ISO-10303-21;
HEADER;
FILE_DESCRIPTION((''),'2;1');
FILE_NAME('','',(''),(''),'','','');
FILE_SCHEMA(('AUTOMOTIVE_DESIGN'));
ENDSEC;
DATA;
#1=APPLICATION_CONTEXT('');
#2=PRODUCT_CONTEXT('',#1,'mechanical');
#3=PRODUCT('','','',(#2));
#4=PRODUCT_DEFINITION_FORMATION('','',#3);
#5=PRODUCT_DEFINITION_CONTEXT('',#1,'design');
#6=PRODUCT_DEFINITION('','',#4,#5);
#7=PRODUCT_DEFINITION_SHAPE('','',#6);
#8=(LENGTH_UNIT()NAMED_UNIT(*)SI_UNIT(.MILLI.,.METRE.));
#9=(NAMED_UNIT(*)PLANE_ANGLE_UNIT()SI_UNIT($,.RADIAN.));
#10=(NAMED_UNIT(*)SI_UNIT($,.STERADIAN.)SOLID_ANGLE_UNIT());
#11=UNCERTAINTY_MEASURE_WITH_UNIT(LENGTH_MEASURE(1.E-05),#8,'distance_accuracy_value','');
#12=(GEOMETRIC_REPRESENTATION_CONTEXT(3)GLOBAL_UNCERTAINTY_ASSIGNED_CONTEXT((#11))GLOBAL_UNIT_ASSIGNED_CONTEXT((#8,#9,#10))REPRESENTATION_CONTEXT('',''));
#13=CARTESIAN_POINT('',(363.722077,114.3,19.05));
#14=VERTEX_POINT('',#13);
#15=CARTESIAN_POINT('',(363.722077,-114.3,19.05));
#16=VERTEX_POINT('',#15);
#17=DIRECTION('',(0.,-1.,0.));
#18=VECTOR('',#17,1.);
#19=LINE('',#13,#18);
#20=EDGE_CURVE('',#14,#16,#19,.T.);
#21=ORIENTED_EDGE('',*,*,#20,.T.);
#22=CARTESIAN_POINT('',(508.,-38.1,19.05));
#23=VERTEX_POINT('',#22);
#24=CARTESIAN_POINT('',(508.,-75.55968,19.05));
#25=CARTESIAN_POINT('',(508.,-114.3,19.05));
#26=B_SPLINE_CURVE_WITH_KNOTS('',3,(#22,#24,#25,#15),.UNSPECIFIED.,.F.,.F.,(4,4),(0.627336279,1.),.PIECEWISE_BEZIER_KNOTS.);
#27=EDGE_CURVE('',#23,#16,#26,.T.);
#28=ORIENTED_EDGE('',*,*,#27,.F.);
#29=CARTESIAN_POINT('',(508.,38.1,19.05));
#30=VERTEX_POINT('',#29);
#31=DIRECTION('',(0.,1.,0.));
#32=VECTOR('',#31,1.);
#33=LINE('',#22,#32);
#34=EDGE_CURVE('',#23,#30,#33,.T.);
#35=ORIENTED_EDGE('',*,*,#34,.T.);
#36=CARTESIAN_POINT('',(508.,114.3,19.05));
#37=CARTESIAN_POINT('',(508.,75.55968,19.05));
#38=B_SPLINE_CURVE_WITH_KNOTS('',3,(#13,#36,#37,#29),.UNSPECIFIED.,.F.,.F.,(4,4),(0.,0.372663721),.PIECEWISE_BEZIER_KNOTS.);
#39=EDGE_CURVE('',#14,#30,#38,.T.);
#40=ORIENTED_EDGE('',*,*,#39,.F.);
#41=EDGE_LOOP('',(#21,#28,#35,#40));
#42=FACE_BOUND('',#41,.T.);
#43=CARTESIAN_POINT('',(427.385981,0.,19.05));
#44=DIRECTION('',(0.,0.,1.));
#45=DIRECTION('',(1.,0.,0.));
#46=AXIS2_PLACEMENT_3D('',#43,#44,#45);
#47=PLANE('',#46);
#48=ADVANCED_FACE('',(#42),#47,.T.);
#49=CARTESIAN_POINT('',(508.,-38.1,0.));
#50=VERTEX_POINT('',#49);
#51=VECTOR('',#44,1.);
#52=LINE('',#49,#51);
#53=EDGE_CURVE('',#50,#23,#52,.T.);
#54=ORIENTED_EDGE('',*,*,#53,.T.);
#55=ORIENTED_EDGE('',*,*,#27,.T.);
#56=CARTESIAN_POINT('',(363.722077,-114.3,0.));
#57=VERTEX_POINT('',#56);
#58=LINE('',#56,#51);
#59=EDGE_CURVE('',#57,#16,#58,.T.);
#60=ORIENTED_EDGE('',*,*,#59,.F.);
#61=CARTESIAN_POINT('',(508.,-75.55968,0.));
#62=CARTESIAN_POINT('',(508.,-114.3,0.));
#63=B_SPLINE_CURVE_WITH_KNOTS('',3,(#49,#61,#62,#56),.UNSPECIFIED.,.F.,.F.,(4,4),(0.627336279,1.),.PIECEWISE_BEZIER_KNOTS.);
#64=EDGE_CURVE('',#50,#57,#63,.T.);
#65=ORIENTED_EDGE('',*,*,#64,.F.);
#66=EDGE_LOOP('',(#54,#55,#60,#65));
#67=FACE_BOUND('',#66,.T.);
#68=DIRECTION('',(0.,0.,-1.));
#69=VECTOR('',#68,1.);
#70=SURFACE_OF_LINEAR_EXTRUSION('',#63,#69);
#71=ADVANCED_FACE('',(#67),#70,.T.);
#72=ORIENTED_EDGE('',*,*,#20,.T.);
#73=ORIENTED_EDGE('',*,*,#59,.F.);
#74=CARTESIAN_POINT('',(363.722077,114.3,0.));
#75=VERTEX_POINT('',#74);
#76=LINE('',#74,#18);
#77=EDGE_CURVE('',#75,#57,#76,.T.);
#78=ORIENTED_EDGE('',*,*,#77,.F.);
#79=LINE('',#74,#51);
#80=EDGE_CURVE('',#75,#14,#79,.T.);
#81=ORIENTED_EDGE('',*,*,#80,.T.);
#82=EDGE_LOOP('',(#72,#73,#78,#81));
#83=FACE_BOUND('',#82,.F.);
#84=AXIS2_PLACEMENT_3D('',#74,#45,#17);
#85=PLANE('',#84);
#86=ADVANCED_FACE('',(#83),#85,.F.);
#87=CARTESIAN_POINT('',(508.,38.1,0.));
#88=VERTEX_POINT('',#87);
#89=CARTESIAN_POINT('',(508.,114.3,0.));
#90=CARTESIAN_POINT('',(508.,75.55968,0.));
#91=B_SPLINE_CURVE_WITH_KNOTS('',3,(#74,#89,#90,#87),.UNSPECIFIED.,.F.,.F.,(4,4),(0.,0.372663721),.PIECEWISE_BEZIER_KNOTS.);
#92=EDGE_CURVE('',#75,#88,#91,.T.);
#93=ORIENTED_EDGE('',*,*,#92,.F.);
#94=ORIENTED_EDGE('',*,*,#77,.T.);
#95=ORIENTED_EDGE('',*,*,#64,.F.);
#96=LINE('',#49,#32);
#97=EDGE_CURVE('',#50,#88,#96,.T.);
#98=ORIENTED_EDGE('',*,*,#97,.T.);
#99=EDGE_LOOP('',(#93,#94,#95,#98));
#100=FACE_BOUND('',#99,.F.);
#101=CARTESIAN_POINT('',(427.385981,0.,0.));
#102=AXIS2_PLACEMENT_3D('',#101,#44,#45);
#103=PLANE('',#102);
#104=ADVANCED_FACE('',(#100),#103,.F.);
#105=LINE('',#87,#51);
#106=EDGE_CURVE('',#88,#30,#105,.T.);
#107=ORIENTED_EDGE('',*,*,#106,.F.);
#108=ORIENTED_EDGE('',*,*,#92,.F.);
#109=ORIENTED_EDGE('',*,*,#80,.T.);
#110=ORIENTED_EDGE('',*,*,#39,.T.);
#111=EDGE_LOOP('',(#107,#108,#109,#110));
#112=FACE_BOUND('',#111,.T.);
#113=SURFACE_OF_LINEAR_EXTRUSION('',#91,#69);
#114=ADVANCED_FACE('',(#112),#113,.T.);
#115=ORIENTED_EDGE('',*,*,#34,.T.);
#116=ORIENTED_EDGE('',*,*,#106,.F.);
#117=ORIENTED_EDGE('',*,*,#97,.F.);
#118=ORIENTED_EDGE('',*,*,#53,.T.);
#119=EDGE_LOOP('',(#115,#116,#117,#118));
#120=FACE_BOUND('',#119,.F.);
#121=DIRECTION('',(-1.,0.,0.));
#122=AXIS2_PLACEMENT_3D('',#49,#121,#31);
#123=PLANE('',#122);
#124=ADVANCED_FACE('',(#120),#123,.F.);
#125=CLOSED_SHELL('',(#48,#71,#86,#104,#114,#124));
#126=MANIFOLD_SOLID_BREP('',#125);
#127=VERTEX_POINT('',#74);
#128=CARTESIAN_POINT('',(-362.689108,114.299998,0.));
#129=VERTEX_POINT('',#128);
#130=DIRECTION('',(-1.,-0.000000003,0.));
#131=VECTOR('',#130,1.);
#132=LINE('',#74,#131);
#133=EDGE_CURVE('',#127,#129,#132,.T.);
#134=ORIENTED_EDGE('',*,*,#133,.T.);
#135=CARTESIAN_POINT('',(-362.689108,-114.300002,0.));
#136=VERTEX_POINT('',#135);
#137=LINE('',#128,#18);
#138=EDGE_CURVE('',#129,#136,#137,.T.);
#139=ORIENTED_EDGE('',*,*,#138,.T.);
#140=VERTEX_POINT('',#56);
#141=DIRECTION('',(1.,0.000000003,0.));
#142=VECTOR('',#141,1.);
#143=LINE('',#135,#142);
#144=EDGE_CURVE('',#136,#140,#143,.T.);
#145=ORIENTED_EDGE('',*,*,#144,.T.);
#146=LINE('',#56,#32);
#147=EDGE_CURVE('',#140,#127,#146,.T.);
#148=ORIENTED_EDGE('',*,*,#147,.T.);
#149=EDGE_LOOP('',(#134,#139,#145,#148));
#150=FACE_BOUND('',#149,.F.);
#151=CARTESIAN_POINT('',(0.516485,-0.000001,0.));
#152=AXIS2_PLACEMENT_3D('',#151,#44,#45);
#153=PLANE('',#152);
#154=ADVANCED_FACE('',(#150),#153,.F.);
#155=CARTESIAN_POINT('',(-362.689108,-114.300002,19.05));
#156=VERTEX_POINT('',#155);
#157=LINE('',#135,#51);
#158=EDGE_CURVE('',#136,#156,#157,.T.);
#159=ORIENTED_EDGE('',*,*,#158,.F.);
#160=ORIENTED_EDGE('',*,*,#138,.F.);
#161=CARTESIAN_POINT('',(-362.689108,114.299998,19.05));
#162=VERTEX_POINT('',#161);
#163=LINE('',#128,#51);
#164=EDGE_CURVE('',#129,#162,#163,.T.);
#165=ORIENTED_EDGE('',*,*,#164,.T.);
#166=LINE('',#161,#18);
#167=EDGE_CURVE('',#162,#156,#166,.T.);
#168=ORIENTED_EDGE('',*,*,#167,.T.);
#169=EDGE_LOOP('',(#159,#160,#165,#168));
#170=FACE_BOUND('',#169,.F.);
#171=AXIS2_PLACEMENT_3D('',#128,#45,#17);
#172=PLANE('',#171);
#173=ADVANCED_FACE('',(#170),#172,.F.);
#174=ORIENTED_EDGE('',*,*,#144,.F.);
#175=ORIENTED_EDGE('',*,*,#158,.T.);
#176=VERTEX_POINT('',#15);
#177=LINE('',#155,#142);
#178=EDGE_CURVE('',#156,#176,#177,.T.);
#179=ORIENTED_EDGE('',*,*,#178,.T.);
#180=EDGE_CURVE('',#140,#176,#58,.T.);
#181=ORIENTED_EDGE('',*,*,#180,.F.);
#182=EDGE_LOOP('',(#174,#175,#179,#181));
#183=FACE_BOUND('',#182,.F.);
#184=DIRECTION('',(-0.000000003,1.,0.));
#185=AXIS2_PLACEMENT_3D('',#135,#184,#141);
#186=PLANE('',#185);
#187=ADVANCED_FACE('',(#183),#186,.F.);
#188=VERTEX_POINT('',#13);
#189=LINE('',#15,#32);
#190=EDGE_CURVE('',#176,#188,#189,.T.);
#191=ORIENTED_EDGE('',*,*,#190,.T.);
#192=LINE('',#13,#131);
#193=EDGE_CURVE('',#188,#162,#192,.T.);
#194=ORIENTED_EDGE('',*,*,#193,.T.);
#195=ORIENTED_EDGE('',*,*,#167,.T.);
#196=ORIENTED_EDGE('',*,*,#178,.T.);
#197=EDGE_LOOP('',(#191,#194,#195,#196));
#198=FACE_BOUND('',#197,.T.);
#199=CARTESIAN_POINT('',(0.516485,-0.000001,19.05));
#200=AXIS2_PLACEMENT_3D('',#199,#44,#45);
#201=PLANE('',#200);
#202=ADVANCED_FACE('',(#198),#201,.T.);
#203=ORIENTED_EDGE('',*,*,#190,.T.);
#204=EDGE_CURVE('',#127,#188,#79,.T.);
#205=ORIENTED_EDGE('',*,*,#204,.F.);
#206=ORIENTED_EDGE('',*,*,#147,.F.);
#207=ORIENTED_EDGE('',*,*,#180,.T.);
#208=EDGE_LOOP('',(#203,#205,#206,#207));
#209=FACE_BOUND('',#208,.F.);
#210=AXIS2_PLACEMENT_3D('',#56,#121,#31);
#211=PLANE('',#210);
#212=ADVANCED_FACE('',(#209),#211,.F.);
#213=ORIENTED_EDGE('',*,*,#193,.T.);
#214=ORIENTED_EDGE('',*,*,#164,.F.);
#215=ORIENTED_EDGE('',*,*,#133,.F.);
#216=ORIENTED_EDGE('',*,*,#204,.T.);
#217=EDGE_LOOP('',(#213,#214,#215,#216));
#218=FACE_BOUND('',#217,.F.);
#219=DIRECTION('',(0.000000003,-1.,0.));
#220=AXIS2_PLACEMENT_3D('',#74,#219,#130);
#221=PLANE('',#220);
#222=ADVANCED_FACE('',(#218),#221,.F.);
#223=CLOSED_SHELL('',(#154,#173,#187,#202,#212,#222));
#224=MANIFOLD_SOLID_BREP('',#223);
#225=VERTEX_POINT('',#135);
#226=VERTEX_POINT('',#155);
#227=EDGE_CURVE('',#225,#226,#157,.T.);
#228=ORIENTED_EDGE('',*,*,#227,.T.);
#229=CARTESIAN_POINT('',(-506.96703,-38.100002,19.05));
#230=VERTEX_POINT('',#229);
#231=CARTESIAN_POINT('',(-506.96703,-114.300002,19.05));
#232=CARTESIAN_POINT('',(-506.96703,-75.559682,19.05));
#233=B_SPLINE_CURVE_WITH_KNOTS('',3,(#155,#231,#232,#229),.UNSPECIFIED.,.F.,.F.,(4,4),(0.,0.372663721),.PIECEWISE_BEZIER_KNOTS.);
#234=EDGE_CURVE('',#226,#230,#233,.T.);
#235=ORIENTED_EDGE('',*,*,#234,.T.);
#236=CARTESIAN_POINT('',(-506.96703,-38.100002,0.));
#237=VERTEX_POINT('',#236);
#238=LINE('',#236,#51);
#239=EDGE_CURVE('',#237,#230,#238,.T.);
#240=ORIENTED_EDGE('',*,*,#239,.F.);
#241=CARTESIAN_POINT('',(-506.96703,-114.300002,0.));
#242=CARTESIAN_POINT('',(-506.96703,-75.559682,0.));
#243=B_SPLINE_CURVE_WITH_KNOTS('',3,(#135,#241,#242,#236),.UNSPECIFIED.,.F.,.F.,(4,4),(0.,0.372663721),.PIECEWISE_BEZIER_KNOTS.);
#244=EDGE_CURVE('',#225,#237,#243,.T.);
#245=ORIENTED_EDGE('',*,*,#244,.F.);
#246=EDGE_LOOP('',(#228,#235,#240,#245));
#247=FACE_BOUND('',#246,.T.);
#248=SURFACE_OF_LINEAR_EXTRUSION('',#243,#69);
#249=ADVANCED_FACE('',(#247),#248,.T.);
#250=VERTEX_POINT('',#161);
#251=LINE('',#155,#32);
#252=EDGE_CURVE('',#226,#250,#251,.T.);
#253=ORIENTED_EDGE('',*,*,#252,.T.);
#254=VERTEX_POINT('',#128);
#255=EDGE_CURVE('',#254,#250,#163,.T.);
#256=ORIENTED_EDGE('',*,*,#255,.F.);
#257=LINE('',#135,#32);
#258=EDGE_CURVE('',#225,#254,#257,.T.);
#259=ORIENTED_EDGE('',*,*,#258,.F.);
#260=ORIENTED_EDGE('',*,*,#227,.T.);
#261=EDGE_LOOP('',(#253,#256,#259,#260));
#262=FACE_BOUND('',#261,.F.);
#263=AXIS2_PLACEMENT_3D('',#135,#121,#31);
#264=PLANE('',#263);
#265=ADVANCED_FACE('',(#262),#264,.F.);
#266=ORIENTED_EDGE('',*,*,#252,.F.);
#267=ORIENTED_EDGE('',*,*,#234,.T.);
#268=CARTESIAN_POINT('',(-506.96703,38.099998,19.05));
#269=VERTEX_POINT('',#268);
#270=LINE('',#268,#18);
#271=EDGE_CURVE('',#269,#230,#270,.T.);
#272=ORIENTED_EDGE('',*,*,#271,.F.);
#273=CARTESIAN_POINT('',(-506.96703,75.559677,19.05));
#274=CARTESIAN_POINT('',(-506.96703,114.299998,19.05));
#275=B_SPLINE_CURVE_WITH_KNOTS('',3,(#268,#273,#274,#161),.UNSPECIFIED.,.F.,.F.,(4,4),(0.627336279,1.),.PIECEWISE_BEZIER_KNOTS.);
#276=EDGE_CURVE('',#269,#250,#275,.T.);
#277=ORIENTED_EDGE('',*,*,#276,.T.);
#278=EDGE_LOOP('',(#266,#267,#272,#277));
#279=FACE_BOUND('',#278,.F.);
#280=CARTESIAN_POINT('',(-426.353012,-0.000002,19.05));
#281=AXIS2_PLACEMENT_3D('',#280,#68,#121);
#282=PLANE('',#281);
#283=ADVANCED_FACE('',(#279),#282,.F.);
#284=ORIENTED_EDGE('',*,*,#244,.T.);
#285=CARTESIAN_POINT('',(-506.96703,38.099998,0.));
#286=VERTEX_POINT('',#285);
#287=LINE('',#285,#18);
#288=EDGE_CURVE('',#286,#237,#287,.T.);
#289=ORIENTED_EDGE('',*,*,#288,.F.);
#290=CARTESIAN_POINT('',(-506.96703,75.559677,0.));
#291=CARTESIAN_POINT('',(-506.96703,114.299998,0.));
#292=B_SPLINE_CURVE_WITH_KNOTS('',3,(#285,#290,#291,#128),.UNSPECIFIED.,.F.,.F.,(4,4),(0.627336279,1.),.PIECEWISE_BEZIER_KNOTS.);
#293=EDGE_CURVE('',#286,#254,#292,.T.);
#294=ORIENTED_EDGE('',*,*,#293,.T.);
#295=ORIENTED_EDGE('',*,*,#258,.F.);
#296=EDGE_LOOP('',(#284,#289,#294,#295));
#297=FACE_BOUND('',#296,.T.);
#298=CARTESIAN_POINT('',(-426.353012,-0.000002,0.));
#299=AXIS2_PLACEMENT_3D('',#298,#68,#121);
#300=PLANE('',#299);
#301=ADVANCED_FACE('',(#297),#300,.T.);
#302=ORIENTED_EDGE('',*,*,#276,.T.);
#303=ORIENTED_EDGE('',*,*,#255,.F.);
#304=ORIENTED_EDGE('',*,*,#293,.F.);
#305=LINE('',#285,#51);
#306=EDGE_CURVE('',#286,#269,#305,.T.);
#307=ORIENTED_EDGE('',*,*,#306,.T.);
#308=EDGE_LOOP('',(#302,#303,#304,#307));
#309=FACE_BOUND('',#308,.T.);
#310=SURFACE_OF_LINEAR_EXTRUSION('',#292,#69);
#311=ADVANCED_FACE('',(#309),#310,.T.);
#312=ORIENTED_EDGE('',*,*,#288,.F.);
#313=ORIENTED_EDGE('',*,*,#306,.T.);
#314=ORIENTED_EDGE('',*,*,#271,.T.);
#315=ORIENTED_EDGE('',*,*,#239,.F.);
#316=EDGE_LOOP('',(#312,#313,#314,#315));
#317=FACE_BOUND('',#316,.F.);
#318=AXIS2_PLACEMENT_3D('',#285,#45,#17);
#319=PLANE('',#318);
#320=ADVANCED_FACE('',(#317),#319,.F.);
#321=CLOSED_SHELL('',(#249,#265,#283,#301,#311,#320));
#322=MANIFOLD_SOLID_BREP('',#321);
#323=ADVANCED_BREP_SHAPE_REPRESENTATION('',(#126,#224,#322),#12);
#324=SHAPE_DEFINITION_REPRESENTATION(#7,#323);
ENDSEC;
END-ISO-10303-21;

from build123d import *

# Parameters (mm, degrees)
F1_DEPTH = 19.05
F2_DEPTH = 19.05


# Not quite as in the source:
# - ends of sketch curves that miss each other by under 0.0002 mm in the source are joined


with BuildPart() as f1:
    # F0 (on Top) → F1 (new body)
    with BuildSketch(Plane.XY):
        Polygon((-362.6891076565, 114.2999976873), (-362.6891076565, -114.3000023127), (363.7220774023, -114.3), (363.7220774023, 114.3), align=None)
    extrude(amount=F1_DEPTH)


with BuildPart() as f2:
    # F0 (on Top) → F2 (new body)
    with BuildSketch(Plane.XY):
        with BuildLine():
            Line((363.7220774023, 114.3), (363.7220774023, -114.3))
            add(Edge.make_bspline(
                [(508, -38.1), (508, -75.5596795078), (508, -114.3), (363.7220774023, -114.3)],
                knots=[0.6273362794, 0.6273362794, 0.6273362794, 0.6273362794, 1, 1, 1, 1], degree=3))
            Line((508, -38.1), (508, 38.1))
            add(Edge.make_bspline(
                [(363.7220774023, 114.3), (508, 114.3), (508, 75.5596795078), (508, 38.1)],
                knots=[0, 0, 0, 0, 0.3726637206, 0.3726637206, 0.3726637206, 0.3726637206], degree=3))
        make_face()
    extrude(amount=F2_DEPTH)


with BuildPart() as f2b:
    # F0 (on Top) → F2, piece 2 (new body)
    with BuildSketch(Plane.XY):
        with BuildLine():
            add(Edge.make_bspline(
                [(-362.6891076565, -114.3000023127), (-506.9670302542, -114.3000023127), (-506.9670302542, -75.5596818205), (-506.9670302542, -38.1000023127)],
                knots=[0, 0, 0, 0, 0.3726637206, 0.3726637206, 0.3726637206, 0.3726637206], degree=3))
            Line((-362.6891076565, -114.3000023127), (-362.6891076565, 114.2999976873))
            add(Edge.make_bspline(
                [(-506.9670302542, 38.0999976873), (-506.9670302542, 75.5596771952), (-506.9670302542, 114.2999976873), (-362.6891076565, 114.2999976873)],
                knots=[0.6273362794, 0.6273362794, 0.6273362794, 0.6273362794, 1, 1, 1, 1], degree=3))
            Line((-506.9670302542, 38.0999976873), (-506.9670302542, -38.1000023127))
        make_face()
    extrude(amount=F2_DEPTH)


solid = Compound([f1.part, f2.part, f2b.part])
